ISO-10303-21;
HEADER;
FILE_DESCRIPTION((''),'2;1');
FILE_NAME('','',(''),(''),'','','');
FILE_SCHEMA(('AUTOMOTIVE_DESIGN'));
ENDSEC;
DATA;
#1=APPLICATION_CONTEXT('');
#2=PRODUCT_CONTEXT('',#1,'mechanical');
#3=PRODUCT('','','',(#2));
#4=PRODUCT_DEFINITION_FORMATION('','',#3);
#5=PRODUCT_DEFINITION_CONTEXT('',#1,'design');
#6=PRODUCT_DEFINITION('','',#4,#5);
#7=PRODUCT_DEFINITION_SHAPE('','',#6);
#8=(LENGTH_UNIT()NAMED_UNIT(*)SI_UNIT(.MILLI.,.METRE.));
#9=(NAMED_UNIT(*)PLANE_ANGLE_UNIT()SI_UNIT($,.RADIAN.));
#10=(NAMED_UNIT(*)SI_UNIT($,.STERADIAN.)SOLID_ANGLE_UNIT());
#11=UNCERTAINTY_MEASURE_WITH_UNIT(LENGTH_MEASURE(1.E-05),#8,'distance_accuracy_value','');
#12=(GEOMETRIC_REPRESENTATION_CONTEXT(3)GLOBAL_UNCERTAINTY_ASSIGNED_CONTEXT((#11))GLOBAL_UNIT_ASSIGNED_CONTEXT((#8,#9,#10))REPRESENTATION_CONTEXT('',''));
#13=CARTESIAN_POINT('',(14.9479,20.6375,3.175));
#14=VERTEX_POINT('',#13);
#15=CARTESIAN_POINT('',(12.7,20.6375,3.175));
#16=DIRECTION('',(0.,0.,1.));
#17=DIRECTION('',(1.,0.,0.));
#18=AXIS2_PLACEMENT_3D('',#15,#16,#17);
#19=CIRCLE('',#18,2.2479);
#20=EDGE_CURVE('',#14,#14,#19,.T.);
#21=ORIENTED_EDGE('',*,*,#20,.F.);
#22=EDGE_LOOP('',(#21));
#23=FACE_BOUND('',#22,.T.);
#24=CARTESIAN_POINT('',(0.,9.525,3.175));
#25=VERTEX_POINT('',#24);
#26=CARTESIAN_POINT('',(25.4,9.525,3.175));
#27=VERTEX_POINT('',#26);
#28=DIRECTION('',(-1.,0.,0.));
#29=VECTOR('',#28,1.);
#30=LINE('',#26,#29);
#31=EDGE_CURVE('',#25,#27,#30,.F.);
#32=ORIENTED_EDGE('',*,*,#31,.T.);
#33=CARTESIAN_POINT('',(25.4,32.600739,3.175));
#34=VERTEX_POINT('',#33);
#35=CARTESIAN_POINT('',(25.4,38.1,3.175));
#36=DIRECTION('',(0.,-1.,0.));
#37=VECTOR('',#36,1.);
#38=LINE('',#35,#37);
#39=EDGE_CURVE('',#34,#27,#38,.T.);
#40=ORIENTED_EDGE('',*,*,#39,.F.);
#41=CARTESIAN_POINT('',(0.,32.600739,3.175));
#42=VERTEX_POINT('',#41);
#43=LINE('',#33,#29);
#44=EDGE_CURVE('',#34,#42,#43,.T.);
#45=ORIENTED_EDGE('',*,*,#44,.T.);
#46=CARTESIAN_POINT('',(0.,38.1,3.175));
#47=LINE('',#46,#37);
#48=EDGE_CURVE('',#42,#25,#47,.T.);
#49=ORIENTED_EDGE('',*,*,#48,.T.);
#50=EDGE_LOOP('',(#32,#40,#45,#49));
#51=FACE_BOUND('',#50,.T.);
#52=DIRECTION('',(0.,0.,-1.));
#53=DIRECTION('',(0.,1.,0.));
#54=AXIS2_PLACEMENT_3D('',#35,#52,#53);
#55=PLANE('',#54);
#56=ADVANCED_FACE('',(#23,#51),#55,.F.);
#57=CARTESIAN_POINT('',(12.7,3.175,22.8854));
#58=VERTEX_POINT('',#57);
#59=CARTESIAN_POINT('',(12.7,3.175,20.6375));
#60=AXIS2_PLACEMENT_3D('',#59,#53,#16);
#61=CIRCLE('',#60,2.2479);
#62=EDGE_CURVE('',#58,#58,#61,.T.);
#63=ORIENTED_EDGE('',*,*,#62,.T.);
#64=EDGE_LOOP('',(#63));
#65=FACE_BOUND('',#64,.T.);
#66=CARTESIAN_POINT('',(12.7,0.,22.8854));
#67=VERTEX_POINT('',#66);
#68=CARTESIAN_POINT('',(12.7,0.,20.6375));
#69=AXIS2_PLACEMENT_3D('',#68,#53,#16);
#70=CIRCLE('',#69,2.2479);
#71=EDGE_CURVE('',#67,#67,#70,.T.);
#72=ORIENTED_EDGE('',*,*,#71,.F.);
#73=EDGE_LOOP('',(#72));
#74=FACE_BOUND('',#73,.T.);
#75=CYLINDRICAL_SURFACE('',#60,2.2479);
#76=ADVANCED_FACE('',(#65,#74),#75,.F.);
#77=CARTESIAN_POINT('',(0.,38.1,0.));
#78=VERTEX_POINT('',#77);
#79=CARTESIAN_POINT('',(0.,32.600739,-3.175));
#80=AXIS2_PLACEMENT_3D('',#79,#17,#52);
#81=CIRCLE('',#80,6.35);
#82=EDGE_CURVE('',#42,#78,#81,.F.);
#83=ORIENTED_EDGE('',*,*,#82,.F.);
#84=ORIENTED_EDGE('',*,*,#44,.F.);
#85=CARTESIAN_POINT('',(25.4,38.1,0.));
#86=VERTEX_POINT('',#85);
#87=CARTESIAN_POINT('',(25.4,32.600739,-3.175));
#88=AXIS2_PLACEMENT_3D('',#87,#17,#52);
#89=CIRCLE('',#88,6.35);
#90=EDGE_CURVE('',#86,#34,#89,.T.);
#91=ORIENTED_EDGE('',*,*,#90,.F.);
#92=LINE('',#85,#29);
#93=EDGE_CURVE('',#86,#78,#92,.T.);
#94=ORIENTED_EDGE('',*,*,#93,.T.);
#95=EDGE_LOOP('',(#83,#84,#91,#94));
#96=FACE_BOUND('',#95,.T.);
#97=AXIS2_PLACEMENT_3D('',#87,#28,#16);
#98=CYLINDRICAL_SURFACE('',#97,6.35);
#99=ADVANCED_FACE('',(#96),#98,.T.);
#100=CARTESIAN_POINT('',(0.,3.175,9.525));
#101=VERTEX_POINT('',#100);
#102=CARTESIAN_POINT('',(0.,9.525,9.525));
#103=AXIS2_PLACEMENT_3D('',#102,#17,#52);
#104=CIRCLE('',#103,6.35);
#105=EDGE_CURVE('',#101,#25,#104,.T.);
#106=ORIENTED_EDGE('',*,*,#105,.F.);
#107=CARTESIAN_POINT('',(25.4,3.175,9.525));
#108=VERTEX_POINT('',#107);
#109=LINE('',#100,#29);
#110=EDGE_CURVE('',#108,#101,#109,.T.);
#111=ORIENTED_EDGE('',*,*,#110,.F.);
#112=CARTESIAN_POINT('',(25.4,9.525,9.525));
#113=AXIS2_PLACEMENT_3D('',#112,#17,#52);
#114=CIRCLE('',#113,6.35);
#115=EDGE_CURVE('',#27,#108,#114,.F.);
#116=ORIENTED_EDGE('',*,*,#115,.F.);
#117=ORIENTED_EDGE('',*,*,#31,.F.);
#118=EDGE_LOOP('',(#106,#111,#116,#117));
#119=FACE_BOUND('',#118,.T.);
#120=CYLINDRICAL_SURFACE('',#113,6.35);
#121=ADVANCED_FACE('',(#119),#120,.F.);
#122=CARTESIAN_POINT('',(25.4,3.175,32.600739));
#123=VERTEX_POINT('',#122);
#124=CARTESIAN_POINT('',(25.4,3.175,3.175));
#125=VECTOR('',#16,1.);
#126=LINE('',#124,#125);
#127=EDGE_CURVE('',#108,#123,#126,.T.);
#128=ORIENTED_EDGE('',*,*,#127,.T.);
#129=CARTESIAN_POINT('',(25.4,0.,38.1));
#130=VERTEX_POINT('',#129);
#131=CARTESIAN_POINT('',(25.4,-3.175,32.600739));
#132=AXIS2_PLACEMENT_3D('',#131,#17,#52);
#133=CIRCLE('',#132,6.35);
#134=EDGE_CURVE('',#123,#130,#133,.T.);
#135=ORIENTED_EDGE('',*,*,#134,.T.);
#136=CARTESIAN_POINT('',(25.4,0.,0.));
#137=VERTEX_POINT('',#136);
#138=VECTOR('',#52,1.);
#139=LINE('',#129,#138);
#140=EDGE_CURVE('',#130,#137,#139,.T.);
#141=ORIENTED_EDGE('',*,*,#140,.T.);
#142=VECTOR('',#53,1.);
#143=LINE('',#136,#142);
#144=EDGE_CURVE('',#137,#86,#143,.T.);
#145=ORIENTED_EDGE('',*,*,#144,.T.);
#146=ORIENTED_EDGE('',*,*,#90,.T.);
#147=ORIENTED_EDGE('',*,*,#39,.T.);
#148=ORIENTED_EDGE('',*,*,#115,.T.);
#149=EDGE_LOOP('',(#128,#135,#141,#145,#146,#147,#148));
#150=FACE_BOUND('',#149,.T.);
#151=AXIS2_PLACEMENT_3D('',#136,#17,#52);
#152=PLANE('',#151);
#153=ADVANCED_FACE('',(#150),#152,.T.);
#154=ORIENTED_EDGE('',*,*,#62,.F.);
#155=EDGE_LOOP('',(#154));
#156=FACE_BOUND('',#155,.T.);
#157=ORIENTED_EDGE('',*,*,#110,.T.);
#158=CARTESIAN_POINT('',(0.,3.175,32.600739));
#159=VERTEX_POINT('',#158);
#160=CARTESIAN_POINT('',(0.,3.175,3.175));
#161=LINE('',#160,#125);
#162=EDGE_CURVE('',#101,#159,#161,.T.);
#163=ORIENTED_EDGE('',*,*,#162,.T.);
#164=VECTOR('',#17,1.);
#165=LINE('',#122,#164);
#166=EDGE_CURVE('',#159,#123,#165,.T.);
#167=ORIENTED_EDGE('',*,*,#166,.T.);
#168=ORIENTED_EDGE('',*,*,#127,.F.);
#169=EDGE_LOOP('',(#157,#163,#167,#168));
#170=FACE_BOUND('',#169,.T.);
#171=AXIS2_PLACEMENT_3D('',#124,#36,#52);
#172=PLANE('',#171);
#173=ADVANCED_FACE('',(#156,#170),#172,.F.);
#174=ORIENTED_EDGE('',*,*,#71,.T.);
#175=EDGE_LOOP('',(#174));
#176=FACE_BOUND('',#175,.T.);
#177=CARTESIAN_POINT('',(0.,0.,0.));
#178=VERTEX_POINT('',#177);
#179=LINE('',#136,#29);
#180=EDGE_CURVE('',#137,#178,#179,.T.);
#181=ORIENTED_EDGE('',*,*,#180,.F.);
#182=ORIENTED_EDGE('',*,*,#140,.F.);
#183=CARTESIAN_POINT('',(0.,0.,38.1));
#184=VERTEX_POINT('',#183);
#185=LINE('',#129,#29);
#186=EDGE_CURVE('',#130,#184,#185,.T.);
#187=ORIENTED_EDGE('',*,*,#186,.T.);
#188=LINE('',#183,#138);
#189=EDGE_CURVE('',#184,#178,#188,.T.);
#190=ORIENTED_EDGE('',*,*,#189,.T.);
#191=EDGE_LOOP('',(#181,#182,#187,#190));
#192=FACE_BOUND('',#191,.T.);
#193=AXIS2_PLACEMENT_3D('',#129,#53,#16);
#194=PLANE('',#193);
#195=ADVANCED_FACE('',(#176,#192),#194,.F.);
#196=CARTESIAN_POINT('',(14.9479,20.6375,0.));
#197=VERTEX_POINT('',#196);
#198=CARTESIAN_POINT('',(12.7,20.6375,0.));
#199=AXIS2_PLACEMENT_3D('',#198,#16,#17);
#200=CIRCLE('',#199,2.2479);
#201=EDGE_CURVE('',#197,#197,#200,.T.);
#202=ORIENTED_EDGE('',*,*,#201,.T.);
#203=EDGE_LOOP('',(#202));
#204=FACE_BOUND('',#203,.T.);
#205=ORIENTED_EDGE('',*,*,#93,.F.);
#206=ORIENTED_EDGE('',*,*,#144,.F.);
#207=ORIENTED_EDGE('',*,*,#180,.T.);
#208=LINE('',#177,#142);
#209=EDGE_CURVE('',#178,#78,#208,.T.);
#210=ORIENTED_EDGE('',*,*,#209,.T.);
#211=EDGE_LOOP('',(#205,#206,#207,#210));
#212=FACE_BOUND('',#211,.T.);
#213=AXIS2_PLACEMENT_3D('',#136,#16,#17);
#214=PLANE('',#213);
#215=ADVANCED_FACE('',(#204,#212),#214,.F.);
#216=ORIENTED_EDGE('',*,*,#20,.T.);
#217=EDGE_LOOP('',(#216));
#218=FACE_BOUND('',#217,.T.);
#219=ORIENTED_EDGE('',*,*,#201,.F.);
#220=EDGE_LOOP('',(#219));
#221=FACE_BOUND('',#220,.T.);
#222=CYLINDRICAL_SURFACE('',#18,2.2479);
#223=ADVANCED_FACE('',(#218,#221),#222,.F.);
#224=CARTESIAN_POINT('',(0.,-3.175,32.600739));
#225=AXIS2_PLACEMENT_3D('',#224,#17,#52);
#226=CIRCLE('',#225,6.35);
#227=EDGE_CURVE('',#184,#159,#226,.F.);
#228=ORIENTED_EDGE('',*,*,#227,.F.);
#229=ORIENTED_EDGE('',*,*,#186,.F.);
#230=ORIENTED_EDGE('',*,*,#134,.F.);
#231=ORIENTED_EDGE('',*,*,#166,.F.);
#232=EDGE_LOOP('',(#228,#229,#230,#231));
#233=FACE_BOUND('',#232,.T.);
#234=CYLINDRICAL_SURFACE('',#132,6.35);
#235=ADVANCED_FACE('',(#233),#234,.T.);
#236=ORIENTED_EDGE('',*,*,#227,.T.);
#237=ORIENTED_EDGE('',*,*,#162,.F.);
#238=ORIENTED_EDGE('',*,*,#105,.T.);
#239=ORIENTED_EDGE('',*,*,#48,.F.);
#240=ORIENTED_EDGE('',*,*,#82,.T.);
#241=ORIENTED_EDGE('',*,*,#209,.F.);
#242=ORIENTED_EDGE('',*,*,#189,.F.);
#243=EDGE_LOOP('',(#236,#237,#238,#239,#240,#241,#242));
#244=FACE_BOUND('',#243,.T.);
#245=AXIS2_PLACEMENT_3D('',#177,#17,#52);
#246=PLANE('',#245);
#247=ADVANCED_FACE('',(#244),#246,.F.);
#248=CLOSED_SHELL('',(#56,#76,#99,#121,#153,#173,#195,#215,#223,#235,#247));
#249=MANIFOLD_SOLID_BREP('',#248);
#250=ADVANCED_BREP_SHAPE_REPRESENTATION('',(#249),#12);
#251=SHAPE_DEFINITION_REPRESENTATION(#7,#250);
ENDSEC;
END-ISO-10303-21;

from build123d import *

# Parameters (mm, degrees)
BOSS_EXTRUDE1_DEPTH   = 25.4
FILLET1_R             = 6.35
F_8_CLEARANCE_HOLE1_D = 4.4958
F_8_CLEARANCE_HOLE2_D = 4.4958


with BuildPart() as part:
    # Sketch1 → Boss-Extrude1 (new body)
    with BuildSketch(Plane(origin=(0, 0, 0), x_dir=(0, 0, -1), z_dir=(1, 0, 0))):
        Polygon((0, 0), (0, 38.1), (-3.175, 38.1), (-3.175, 3.175), (-38.1, 3.175), (-38.1, 0), align=None)
    extrude(amount=BOSS_EXTRUDE1_DEPTH)

    # Fillet1
    # the kernel refuses this fillet: 6.35 mm, written as the material it adds along each edge
    with BuildSketch(Plane(origin=(0, 3.175, 3.175), x_dir=(0, 1, 0), z_dir=(1, 0, 0))) as fillet1_piece_1:
        with BuildLine():
            CenterArc((FILLET1_R, FILLET1_R), FILLET1_R, 180, 90)
            Line((0, FILLET1_R), (0, 0))
            Line((0, 0), (FILLET1_R, 0))
        make_face()
    extrude(amount=25.4)
    # the kernel refuses this fillet: 6.35 mm, written as the material it takes off along each edge
    with BuildSketch(Plane(origin=(-13.748153285, 38.1, 3.175), x_dir=(0, 0, -1), z_dir=(1, 0, 0))) as fillet1_2_piece_1:
        with BuildLine():
            CenterArc((6.35, -5.499261314), FILLET1_R, 120, 60)
            Line((0, -5.499261314), (0, 0))
            Line((0, 0), (3.175, 0))
        make_face()
    extrude(amount=52.89630657, mode=Mode.SUBTRACT)
    with BuildSketch(Plane(origin=(-13.748153285, 3.175, 38.1), x_dir=(0, -1, 0), z_dir=(1, 0, 0))) as fillet1_2_piece_2:
        with BuildLine():
            CenterArc((6.35, 5.499261314), FILLET1_R, 180, 60)
            Line((0, 5.499261314), (0, 0))
            Line((0, 0), (3.175, 0))
        make_face()
    extrude(amount=52.89630657, mode=Mode.SUBTRACT)

    # #8 Clearance Hole1 (through all)
    with Locations(Plane.XY.offset(3.175)):
        with Locations((12.7, 20.6375)):
            Hole(F_8_CLEARANCE_HOLE1_D / 2)

    # #8 Clearance Hole2 (through all)
    with Locations(Plane(origin=(0, 3.175, 0), x_dir=(1, 0, 0), z_dir=(0, 1, 0))):
        with Locations((12.7, -20.6375)):
            Hole(F_8_CLEARANCE_HOLE2_D / 2)


solid = part.part
